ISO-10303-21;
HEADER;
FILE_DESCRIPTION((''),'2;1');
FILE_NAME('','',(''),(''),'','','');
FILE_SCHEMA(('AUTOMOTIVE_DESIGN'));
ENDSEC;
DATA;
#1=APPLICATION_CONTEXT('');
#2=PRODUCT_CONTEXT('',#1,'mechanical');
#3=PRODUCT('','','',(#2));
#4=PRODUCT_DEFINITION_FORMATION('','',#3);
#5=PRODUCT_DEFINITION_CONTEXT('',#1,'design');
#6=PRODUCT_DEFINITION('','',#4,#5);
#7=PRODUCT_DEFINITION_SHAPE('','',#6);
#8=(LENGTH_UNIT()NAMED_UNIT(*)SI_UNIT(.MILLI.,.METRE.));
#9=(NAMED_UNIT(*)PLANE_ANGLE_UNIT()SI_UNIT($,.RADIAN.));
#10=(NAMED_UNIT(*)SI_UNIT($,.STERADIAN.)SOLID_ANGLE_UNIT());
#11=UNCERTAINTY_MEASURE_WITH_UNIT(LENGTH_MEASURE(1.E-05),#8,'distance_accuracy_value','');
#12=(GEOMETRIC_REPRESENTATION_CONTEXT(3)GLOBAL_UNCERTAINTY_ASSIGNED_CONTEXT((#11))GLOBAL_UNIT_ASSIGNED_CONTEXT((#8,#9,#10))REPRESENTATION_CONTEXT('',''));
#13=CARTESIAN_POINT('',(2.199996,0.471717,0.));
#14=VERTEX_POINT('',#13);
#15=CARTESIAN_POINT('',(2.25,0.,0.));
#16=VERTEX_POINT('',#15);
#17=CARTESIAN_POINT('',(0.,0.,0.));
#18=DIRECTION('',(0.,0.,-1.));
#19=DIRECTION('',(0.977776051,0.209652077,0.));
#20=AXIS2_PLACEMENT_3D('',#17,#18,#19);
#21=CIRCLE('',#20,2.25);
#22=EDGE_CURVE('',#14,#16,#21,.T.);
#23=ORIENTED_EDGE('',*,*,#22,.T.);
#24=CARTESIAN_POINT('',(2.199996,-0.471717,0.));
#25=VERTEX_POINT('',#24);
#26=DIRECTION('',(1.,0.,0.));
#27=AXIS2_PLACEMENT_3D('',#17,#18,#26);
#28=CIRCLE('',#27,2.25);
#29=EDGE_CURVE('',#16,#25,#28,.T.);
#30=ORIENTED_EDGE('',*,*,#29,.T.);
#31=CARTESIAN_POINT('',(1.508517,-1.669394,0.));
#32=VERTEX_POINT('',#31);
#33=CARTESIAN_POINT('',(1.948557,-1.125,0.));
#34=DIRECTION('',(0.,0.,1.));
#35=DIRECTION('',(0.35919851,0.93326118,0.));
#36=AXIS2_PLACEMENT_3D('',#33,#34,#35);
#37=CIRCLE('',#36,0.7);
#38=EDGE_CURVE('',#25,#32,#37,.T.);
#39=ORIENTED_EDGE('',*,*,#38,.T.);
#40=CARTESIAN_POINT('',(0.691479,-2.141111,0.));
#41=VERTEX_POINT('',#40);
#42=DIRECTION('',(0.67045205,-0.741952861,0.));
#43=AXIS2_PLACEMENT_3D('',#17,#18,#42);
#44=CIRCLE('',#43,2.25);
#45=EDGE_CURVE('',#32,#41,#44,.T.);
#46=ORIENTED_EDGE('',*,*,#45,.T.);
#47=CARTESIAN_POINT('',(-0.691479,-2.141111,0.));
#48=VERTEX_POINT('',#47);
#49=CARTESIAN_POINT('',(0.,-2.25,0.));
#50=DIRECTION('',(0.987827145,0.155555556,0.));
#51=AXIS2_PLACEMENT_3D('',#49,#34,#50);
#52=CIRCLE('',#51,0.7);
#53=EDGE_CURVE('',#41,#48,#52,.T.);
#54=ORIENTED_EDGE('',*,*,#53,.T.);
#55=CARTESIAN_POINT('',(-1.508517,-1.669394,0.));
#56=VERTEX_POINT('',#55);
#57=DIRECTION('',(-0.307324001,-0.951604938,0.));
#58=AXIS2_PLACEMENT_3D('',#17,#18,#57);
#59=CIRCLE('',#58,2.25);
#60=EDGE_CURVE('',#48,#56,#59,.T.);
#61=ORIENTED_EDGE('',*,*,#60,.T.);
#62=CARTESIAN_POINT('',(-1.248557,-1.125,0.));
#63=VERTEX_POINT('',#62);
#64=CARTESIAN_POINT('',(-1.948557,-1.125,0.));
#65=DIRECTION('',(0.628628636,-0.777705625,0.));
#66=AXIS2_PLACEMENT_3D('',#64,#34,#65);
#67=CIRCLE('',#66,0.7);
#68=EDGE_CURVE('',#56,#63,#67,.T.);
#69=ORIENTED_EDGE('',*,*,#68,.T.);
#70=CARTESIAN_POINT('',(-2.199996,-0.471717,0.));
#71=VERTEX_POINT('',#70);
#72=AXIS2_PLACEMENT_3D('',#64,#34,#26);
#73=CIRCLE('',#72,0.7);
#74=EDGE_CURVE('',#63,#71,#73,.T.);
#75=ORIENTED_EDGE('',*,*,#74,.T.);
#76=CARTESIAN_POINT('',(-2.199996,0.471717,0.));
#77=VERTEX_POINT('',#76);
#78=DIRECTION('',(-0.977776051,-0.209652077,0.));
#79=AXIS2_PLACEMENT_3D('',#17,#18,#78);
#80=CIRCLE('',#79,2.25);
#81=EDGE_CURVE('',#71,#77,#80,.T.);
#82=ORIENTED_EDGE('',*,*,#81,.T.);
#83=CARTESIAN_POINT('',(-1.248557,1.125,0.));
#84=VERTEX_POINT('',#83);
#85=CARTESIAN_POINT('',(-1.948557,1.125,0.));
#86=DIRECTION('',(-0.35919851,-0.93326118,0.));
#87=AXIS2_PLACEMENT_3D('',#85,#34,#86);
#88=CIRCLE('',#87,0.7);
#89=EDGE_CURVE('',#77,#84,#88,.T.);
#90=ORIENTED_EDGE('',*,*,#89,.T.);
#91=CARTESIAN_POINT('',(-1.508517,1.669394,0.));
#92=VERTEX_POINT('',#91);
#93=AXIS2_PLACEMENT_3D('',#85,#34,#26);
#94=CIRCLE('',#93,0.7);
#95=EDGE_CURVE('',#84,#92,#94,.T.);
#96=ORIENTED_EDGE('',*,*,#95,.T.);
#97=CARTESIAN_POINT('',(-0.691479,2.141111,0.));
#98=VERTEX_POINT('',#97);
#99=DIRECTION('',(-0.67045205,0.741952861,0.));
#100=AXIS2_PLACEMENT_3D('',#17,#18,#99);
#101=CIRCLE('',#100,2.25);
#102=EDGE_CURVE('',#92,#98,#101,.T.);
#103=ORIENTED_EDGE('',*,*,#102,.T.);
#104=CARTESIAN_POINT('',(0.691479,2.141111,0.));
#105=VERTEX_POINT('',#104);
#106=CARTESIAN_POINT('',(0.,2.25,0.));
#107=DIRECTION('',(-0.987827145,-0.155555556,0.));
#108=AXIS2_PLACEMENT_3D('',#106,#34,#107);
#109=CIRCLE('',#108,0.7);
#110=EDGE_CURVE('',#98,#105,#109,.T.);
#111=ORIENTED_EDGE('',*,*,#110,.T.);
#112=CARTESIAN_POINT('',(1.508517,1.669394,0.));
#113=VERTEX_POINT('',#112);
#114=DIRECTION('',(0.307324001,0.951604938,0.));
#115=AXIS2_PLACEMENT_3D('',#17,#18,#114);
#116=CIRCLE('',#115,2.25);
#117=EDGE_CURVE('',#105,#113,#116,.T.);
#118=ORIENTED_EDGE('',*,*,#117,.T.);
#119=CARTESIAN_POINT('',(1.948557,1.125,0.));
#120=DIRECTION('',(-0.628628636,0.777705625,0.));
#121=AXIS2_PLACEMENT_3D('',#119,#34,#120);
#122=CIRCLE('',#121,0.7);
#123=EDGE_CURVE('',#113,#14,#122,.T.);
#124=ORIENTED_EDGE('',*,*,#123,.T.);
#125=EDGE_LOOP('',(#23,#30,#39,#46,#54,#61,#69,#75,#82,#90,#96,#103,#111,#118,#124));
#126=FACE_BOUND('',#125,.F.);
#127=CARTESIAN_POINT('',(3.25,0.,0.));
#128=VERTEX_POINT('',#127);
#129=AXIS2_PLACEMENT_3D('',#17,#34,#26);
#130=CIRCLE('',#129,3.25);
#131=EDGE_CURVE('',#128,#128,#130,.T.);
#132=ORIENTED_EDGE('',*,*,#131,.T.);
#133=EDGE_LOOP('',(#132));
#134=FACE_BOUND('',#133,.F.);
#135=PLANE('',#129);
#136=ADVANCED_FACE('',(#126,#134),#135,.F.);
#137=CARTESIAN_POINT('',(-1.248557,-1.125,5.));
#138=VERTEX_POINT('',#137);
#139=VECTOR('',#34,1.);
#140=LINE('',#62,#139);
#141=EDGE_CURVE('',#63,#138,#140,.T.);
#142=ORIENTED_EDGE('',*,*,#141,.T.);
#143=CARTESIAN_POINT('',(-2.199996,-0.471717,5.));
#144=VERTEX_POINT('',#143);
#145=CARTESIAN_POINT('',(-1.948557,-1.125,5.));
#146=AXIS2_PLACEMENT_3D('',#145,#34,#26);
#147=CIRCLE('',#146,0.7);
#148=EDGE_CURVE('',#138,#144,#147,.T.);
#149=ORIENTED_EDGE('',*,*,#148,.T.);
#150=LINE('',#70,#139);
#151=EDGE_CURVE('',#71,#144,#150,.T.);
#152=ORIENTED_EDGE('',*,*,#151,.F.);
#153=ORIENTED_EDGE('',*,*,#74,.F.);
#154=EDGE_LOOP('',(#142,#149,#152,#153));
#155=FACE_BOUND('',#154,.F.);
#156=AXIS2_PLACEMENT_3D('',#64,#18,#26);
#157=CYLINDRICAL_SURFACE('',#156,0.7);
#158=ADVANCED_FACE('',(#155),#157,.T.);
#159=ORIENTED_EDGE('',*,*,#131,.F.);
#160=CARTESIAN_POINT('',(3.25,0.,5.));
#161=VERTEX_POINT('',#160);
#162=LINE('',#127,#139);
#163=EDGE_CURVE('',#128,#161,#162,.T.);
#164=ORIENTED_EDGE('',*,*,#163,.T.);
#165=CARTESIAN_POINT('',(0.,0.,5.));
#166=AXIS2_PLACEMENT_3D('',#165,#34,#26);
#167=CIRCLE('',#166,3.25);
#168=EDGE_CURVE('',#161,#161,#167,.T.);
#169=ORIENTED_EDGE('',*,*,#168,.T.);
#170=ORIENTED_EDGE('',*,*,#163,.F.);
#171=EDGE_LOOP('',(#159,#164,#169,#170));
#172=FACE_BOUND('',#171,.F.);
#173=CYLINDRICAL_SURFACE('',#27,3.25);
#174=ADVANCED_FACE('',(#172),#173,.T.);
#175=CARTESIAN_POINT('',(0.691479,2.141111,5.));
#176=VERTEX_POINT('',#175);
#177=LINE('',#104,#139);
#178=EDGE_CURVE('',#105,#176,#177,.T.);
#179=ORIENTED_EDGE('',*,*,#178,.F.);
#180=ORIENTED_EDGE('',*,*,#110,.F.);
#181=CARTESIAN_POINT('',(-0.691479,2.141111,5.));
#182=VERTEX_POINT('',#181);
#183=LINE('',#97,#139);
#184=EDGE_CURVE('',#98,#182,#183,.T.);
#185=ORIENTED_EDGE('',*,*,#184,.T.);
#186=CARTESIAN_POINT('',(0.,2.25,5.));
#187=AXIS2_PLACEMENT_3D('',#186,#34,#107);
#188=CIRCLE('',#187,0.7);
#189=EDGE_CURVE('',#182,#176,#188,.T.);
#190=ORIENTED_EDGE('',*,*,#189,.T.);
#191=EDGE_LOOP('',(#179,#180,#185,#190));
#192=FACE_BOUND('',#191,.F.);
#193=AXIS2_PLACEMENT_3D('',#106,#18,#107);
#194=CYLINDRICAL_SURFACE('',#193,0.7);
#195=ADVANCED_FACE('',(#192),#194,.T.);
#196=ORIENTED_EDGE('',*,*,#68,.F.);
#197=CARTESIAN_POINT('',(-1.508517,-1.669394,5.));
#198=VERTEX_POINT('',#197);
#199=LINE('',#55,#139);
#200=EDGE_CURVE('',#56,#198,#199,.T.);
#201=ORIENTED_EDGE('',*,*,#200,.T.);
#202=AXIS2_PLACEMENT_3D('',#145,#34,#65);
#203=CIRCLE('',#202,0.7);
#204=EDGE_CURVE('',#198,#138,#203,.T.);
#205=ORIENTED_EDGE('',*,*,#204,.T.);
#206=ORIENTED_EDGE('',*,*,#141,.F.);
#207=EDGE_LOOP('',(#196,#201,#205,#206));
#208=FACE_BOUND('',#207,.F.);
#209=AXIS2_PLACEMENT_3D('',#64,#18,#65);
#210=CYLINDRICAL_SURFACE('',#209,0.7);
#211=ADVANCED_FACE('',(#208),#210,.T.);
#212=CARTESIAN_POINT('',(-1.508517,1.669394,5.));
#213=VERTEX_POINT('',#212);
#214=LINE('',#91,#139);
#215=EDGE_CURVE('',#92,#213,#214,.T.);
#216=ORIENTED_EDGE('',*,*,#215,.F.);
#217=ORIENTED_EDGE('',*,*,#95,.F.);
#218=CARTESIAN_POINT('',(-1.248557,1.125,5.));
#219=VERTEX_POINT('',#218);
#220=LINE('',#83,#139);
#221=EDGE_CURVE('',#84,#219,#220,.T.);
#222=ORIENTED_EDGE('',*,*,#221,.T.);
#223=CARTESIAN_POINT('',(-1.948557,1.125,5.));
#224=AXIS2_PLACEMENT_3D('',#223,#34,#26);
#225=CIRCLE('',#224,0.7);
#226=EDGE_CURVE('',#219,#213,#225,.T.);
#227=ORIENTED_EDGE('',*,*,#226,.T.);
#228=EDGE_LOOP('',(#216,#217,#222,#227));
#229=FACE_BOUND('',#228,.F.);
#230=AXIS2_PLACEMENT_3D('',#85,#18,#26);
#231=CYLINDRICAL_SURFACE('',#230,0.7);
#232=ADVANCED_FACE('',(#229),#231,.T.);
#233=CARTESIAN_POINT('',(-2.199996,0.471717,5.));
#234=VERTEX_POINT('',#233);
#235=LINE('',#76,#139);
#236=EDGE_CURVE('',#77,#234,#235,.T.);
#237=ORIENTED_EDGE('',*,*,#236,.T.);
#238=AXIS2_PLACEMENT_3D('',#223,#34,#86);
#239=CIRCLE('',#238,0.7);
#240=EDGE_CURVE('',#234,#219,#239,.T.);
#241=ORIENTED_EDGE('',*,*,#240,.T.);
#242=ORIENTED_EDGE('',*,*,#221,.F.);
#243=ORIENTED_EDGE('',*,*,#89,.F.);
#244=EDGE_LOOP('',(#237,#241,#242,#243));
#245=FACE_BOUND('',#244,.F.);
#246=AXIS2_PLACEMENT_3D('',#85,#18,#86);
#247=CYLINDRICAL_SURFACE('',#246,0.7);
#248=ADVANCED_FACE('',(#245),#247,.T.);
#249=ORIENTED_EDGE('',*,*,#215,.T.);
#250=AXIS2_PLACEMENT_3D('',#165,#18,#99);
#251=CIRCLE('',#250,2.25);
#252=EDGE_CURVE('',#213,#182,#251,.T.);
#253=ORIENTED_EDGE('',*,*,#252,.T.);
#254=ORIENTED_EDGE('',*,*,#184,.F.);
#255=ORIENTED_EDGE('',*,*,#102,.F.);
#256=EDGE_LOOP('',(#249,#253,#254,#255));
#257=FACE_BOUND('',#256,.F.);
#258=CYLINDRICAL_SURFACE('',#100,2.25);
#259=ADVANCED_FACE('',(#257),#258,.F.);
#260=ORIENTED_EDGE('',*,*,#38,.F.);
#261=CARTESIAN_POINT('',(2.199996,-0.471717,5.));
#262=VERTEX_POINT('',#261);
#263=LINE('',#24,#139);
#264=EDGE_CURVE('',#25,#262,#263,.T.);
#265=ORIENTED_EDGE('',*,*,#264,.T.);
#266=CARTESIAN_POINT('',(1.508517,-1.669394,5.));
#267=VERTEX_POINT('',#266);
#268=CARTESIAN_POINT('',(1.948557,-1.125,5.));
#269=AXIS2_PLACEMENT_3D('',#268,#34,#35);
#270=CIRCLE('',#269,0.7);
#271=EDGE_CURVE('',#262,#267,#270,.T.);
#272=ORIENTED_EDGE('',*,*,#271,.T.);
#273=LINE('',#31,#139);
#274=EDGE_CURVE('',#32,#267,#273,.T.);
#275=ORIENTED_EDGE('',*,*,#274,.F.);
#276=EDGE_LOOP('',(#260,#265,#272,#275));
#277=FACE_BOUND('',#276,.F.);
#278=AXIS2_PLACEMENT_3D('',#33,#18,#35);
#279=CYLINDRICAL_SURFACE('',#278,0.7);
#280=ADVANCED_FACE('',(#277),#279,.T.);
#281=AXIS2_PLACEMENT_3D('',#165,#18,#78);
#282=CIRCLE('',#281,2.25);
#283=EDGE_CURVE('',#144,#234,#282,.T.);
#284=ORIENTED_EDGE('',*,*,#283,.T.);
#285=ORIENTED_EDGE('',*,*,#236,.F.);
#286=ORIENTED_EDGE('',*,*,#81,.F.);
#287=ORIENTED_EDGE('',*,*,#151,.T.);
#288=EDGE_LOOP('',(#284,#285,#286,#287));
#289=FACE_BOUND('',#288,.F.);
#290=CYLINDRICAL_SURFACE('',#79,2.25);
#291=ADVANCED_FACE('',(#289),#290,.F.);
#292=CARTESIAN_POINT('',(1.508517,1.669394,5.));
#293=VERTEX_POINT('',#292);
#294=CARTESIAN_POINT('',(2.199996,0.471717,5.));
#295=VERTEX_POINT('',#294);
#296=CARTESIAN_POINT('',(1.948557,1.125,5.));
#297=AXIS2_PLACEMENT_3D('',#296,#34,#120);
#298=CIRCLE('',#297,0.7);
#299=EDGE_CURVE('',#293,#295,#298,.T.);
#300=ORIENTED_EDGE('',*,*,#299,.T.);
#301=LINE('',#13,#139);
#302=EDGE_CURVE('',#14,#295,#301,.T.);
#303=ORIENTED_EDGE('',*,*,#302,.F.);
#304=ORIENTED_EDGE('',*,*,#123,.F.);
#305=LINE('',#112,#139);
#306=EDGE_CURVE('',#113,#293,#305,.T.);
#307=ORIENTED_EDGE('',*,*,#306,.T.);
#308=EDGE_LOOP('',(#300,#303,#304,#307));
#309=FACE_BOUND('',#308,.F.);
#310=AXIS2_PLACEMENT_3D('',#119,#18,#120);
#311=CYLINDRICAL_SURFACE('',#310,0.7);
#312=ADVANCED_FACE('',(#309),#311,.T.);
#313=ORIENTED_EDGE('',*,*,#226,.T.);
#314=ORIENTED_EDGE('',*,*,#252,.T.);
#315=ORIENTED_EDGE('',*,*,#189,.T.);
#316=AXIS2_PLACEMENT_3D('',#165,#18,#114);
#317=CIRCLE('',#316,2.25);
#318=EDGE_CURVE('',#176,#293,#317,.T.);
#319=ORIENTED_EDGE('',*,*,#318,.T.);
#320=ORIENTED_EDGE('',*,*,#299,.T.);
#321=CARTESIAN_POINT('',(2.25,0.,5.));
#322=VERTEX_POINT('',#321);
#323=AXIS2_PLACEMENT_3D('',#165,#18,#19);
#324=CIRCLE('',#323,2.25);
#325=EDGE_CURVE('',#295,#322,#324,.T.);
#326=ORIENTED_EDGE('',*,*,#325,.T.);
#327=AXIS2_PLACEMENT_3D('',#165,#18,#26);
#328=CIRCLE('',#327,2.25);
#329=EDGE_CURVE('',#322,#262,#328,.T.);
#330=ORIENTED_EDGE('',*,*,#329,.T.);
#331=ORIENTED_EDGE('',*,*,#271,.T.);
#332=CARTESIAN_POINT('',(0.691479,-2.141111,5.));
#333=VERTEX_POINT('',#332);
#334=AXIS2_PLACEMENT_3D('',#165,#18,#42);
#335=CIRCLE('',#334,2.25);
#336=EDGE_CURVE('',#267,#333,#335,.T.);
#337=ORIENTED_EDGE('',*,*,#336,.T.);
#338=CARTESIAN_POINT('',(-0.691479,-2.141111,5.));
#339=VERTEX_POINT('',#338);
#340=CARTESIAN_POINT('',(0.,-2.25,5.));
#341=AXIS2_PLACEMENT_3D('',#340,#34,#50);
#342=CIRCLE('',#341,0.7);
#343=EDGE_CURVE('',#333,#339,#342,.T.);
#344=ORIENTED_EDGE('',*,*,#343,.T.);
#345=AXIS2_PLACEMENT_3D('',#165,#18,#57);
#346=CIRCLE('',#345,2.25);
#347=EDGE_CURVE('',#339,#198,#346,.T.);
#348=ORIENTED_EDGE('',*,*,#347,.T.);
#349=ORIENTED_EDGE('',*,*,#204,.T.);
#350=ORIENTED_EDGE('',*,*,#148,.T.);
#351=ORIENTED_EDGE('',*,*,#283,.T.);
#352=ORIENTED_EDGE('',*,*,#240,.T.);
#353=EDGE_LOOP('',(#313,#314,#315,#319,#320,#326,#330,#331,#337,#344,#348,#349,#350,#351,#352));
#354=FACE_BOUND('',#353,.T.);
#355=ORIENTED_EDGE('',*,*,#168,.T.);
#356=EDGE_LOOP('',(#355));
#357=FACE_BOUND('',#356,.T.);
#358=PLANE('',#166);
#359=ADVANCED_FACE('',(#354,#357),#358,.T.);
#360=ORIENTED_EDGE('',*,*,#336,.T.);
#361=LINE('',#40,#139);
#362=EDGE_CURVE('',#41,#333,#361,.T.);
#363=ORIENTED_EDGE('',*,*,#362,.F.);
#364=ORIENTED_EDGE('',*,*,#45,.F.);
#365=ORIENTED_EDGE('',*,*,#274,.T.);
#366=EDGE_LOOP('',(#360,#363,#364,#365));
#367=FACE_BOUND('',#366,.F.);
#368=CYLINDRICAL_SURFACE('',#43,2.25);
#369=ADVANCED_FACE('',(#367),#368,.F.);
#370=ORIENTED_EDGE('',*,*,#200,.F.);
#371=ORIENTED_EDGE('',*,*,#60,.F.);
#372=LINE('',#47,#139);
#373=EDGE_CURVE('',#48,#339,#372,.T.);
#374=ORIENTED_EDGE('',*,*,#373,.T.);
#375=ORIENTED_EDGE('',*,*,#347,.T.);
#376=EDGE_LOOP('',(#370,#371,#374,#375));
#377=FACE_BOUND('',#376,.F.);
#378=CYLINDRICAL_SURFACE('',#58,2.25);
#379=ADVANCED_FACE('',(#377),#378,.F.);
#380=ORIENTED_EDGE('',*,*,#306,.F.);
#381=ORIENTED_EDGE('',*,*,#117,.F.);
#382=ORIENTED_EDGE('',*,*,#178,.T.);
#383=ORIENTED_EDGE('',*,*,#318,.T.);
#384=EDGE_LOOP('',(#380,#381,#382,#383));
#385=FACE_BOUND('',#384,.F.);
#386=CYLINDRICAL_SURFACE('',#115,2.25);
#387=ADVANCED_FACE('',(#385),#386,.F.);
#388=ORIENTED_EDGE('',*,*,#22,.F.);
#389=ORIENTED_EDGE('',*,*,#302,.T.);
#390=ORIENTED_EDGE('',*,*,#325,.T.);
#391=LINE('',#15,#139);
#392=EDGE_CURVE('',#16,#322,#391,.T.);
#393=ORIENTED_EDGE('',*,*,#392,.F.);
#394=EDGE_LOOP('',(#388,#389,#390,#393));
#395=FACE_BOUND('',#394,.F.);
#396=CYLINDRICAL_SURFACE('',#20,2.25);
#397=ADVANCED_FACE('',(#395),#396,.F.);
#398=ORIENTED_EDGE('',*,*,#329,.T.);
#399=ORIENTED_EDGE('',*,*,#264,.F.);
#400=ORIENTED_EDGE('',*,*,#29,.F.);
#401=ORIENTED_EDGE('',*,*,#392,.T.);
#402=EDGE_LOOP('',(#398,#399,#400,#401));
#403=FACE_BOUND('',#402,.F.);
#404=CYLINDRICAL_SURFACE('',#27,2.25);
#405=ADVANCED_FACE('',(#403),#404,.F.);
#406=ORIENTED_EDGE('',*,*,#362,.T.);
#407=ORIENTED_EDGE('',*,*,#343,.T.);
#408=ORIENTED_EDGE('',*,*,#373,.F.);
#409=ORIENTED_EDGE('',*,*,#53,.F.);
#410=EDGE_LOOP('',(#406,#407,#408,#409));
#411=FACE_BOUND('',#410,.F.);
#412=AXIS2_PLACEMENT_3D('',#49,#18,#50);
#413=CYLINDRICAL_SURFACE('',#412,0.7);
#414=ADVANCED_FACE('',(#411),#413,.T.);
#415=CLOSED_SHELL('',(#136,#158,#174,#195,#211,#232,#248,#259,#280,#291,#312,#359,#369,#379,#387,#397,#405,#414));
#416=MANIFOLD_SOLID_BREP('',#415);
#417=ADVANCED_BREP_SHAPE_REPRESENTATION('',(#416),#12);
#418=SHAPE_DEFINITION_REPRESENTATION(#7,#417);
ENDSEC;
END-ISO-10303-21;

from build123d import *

# Parameters (mm, degrees)
F0_R     = 3.25
F1_DEPTH = 5


with BuildPart() as f1:
    # F0 (on Top) → F1 (new body)
    with BuildSketch(Plane.XY):
        Circle(F0_R)
        with BuildLine():
            ThreePointArc((2.1999961154, 0.4717171738), (2.2374641069, 0.2371800374), (2.25, 0))
            ThreePointArc((2.25, 0), (2.2374641069, -0.2371800374), (2.1999961154, -0.4717171738))
            ThreePointArc((2.1999961154, -0.4717171738), (2.5256218299, -0.7287723318), (2.6485571585, -1.125))
            ThreePointArc((2.6485571585, -1.125), (2.2501959894, -1.7566755621), (1.5085171137, -1.6693939373))
            ThreePointArc((1.5085171137, -1.6693939373), (1.125, -1.9485571585), (0.6914790018, -2.1411111111))
            ThreePointArc((0.6914790018, -2.1411111111), (0.6978664991, -2.1953891093), (0.7, -2.25))
            ThreePointArc((0.7, -2.25), (-0.0546108907, -2.9478664991), (-0.6914790018, -2.1411111111))
            ThreePointArc((-0.6914790018, -2.1411111111), (-1.125, -1.9485571585), (-1.5085171137, -1.6693939373))
            ThreePointArc((-1.5085171137, -1.6693939373), (-2.5547749412, -1.475), (-2.1999961154, -0.4717171738))
            ThreePointArc((-2.1999961154, -0.4717171738), (-2.25, 0), (-2.1999961154, 0.4717171738))
            ThreePointArc((-2.1999961154, 0.4717171738), (-2.5547749412, 1.475), (-1.5085171137, 1.6693939373))
            ThreePointArc((-1.5085171137, 1.6693939373), (-1.125, 1.9485571585), (-0.6914790018, 2.1411111111))
            ThreePointArc((-0.6914790018, 2.1411111111), (-0.0546108907, 2.9478664991), (0.7, 2.25))
            ThreePointArc((0.7, 2.25), (0.6978664991, 2.1953891093), (0.6914790018, 2.1411111111))
            ThreePointArc((0.6914790018, 2.1411111111), (1.125, 1.9485571585), (1.5085171137, 1.6693939373))
            ThreePointArc((1.5085171137, 1.6693939373), (2.2501959894, 1.7566755621), (2.6485571585, 1.125))
            ThreePointArc((2.6485571585, 1.125), (2.5256218299, 0.7287723318), (2.1999961154, 0.4717171738))
        make_face(mode=Mode.SUBTRACT)
        with BuildLine():
            ThreePointArc((1.5085171137, 1.6693939373), (1.9485571585, 1.125), (2.1999961154, 0.4717171738))
            ThreePointArc((2.1999961154, 0.4717171738), (2.5256218299, 0.7287723318), (2.6485571585, 1.125))
            ThreePointArc((2.6485571585, 1.125), (2.2501959894, 1.7566755621), (1.5085171137, 1.6693939373))
        make_face()
        with BuildLine():
            ThreePointArc((2.6485571585, -1.125), (2.5256218299, -0.7287723318), (2.1999961154, -0.4717171738))
            ThreePointArc((2.1999961154, -0.4717171738), (1.9485571585, -1.125), (1.5085171137, -1.6693939373))
            ThreePointArc((1.5085171137, -1.6693939373), (2.2501959894, -1.7566755621), (2.6485571585, -1.125))
        make_face()
        with BuildLine():
            ThreePointArc((-0.6914790018, 2.1411111111), (0, 2.25), (0.6914790018, 2.1411111111))
            ThreePointArc((0.6914790018, 2.1411111111), (0.6978664991, 2.1953891093), (0.7, 2.25))
            ThreePointArc((0.7, 2.25), (-0.0546108907, 2.9478664991), (-0.6914790018, 2.1411111111))
        make_face()
        with BuildLine():
            ThreePointArc((0.7, -2.25), (0.6978664991, -2.1953891093), (0.6914790018, -2.1411111111))
            ThreePointArc((0.6914790018, -2.1411111111), (0, -2.25), (-0.6914790018, -2.1411111111))
            ThreePointArc((-0.6914790018, -2.1411111111), (-0.0546108907, -2.9478664991), (0.7, -2.25))
        make_face()
        with BuildLine():
            ThreePointArc((-2.1999961154, 0.4717171738), (-1.9485571585, 1.125), (-1.5085171137, 1.6693939373))
            ThreePointArc((-1.5085171137, 1.6693939373), (-2.5547749412, 1.475), (-2.1999961154, 0.4717171738))
        make_face()
        with BuildLine():
            ThreePointArc((-2.1999961154, -0.4717171738), (-2.5547749412, -1.475), (-1.5085171137, -1.6693939373))
            ThreePointArc((-1.5085171137, -1.6693939373), (-1.9485571585, -1.125), (-2.1999961154, -0.4717171738))
        make_face()
        with BuildLine():
            ThreePointArc((1.5085171137, 1.6693939373), (1.3423393759, 0.775), (2.1999961154, 0.4717171738))
            ThreePointArc((2.1999961154, 0.4717171738), (1.9485571585, 1.125), (1.5085171137, 1.6693939373))
        make_face()
        with BuildLine():
            ThreePointArc((1.5085171137, -1.6693939373), (1.9485571585, -1.125), (2.1999961154, -0.4717171738))
            ThreePointArc((2.1999961154, -0.4717171738), (1.3423393759, -0.775), (1.5085171137, -1.6693939373))
        make_face()
        with BuildLine():
            ThreePointArc((-0.6914790018, 2.1411111111), (0, 1.55), (0.6914790018, 2.1411111111))
            ThreePointArc((0.6914790018, 2.1411111111), (0, 2.25), (-0.6914790018, 2.1411111111))
        make_face()
        with BuildLine():
            ThreePointArc((-0.6914790018, -2.1411111111), (0, -2.25), (0.6914790018, -2.1411111111))
            ThreePointArc((0.6914790018, -2.1411111111), (0, -1.55), (-0.6914790018, -2.1411111111))
        make_face()
        with BuildLine():
            ThreePointArc((-1.2485571585, 1.125), (-1.3168815965, 1.4266388309), (-1.5085171137, 1.6693939373))
            ThreePointArc((-1.5085171137, 1.6693939373), (-1.9485571585, 1.125), (-2.1999961154, 0.4717171738))
            ThreePointArc((-2.1999961154, 0.4717171738), (-1.5523294903, 0.5479353287), (-1.2485571585, 1.125))
        make_face()
        with BuildLine():
            ThreePointArc((-2.1999961154, -0.4717171738), (-1.9485571585, -1.125), (-1.5085171137, -1.6693939373))
            ThreePointArc((-1.5085171137, -1.6693939373), (-1.3168815965, -1.4266388309), (-1.2485571585, -1.125))
            ThreePointArc((-1.2485571585, -1.125), (-1.5523294903, -0.5479353287), (-2.1999961154, -0.4717171738))
        make_face()
    extrude(amount=F1_DEPTH)


solid = f1.part
